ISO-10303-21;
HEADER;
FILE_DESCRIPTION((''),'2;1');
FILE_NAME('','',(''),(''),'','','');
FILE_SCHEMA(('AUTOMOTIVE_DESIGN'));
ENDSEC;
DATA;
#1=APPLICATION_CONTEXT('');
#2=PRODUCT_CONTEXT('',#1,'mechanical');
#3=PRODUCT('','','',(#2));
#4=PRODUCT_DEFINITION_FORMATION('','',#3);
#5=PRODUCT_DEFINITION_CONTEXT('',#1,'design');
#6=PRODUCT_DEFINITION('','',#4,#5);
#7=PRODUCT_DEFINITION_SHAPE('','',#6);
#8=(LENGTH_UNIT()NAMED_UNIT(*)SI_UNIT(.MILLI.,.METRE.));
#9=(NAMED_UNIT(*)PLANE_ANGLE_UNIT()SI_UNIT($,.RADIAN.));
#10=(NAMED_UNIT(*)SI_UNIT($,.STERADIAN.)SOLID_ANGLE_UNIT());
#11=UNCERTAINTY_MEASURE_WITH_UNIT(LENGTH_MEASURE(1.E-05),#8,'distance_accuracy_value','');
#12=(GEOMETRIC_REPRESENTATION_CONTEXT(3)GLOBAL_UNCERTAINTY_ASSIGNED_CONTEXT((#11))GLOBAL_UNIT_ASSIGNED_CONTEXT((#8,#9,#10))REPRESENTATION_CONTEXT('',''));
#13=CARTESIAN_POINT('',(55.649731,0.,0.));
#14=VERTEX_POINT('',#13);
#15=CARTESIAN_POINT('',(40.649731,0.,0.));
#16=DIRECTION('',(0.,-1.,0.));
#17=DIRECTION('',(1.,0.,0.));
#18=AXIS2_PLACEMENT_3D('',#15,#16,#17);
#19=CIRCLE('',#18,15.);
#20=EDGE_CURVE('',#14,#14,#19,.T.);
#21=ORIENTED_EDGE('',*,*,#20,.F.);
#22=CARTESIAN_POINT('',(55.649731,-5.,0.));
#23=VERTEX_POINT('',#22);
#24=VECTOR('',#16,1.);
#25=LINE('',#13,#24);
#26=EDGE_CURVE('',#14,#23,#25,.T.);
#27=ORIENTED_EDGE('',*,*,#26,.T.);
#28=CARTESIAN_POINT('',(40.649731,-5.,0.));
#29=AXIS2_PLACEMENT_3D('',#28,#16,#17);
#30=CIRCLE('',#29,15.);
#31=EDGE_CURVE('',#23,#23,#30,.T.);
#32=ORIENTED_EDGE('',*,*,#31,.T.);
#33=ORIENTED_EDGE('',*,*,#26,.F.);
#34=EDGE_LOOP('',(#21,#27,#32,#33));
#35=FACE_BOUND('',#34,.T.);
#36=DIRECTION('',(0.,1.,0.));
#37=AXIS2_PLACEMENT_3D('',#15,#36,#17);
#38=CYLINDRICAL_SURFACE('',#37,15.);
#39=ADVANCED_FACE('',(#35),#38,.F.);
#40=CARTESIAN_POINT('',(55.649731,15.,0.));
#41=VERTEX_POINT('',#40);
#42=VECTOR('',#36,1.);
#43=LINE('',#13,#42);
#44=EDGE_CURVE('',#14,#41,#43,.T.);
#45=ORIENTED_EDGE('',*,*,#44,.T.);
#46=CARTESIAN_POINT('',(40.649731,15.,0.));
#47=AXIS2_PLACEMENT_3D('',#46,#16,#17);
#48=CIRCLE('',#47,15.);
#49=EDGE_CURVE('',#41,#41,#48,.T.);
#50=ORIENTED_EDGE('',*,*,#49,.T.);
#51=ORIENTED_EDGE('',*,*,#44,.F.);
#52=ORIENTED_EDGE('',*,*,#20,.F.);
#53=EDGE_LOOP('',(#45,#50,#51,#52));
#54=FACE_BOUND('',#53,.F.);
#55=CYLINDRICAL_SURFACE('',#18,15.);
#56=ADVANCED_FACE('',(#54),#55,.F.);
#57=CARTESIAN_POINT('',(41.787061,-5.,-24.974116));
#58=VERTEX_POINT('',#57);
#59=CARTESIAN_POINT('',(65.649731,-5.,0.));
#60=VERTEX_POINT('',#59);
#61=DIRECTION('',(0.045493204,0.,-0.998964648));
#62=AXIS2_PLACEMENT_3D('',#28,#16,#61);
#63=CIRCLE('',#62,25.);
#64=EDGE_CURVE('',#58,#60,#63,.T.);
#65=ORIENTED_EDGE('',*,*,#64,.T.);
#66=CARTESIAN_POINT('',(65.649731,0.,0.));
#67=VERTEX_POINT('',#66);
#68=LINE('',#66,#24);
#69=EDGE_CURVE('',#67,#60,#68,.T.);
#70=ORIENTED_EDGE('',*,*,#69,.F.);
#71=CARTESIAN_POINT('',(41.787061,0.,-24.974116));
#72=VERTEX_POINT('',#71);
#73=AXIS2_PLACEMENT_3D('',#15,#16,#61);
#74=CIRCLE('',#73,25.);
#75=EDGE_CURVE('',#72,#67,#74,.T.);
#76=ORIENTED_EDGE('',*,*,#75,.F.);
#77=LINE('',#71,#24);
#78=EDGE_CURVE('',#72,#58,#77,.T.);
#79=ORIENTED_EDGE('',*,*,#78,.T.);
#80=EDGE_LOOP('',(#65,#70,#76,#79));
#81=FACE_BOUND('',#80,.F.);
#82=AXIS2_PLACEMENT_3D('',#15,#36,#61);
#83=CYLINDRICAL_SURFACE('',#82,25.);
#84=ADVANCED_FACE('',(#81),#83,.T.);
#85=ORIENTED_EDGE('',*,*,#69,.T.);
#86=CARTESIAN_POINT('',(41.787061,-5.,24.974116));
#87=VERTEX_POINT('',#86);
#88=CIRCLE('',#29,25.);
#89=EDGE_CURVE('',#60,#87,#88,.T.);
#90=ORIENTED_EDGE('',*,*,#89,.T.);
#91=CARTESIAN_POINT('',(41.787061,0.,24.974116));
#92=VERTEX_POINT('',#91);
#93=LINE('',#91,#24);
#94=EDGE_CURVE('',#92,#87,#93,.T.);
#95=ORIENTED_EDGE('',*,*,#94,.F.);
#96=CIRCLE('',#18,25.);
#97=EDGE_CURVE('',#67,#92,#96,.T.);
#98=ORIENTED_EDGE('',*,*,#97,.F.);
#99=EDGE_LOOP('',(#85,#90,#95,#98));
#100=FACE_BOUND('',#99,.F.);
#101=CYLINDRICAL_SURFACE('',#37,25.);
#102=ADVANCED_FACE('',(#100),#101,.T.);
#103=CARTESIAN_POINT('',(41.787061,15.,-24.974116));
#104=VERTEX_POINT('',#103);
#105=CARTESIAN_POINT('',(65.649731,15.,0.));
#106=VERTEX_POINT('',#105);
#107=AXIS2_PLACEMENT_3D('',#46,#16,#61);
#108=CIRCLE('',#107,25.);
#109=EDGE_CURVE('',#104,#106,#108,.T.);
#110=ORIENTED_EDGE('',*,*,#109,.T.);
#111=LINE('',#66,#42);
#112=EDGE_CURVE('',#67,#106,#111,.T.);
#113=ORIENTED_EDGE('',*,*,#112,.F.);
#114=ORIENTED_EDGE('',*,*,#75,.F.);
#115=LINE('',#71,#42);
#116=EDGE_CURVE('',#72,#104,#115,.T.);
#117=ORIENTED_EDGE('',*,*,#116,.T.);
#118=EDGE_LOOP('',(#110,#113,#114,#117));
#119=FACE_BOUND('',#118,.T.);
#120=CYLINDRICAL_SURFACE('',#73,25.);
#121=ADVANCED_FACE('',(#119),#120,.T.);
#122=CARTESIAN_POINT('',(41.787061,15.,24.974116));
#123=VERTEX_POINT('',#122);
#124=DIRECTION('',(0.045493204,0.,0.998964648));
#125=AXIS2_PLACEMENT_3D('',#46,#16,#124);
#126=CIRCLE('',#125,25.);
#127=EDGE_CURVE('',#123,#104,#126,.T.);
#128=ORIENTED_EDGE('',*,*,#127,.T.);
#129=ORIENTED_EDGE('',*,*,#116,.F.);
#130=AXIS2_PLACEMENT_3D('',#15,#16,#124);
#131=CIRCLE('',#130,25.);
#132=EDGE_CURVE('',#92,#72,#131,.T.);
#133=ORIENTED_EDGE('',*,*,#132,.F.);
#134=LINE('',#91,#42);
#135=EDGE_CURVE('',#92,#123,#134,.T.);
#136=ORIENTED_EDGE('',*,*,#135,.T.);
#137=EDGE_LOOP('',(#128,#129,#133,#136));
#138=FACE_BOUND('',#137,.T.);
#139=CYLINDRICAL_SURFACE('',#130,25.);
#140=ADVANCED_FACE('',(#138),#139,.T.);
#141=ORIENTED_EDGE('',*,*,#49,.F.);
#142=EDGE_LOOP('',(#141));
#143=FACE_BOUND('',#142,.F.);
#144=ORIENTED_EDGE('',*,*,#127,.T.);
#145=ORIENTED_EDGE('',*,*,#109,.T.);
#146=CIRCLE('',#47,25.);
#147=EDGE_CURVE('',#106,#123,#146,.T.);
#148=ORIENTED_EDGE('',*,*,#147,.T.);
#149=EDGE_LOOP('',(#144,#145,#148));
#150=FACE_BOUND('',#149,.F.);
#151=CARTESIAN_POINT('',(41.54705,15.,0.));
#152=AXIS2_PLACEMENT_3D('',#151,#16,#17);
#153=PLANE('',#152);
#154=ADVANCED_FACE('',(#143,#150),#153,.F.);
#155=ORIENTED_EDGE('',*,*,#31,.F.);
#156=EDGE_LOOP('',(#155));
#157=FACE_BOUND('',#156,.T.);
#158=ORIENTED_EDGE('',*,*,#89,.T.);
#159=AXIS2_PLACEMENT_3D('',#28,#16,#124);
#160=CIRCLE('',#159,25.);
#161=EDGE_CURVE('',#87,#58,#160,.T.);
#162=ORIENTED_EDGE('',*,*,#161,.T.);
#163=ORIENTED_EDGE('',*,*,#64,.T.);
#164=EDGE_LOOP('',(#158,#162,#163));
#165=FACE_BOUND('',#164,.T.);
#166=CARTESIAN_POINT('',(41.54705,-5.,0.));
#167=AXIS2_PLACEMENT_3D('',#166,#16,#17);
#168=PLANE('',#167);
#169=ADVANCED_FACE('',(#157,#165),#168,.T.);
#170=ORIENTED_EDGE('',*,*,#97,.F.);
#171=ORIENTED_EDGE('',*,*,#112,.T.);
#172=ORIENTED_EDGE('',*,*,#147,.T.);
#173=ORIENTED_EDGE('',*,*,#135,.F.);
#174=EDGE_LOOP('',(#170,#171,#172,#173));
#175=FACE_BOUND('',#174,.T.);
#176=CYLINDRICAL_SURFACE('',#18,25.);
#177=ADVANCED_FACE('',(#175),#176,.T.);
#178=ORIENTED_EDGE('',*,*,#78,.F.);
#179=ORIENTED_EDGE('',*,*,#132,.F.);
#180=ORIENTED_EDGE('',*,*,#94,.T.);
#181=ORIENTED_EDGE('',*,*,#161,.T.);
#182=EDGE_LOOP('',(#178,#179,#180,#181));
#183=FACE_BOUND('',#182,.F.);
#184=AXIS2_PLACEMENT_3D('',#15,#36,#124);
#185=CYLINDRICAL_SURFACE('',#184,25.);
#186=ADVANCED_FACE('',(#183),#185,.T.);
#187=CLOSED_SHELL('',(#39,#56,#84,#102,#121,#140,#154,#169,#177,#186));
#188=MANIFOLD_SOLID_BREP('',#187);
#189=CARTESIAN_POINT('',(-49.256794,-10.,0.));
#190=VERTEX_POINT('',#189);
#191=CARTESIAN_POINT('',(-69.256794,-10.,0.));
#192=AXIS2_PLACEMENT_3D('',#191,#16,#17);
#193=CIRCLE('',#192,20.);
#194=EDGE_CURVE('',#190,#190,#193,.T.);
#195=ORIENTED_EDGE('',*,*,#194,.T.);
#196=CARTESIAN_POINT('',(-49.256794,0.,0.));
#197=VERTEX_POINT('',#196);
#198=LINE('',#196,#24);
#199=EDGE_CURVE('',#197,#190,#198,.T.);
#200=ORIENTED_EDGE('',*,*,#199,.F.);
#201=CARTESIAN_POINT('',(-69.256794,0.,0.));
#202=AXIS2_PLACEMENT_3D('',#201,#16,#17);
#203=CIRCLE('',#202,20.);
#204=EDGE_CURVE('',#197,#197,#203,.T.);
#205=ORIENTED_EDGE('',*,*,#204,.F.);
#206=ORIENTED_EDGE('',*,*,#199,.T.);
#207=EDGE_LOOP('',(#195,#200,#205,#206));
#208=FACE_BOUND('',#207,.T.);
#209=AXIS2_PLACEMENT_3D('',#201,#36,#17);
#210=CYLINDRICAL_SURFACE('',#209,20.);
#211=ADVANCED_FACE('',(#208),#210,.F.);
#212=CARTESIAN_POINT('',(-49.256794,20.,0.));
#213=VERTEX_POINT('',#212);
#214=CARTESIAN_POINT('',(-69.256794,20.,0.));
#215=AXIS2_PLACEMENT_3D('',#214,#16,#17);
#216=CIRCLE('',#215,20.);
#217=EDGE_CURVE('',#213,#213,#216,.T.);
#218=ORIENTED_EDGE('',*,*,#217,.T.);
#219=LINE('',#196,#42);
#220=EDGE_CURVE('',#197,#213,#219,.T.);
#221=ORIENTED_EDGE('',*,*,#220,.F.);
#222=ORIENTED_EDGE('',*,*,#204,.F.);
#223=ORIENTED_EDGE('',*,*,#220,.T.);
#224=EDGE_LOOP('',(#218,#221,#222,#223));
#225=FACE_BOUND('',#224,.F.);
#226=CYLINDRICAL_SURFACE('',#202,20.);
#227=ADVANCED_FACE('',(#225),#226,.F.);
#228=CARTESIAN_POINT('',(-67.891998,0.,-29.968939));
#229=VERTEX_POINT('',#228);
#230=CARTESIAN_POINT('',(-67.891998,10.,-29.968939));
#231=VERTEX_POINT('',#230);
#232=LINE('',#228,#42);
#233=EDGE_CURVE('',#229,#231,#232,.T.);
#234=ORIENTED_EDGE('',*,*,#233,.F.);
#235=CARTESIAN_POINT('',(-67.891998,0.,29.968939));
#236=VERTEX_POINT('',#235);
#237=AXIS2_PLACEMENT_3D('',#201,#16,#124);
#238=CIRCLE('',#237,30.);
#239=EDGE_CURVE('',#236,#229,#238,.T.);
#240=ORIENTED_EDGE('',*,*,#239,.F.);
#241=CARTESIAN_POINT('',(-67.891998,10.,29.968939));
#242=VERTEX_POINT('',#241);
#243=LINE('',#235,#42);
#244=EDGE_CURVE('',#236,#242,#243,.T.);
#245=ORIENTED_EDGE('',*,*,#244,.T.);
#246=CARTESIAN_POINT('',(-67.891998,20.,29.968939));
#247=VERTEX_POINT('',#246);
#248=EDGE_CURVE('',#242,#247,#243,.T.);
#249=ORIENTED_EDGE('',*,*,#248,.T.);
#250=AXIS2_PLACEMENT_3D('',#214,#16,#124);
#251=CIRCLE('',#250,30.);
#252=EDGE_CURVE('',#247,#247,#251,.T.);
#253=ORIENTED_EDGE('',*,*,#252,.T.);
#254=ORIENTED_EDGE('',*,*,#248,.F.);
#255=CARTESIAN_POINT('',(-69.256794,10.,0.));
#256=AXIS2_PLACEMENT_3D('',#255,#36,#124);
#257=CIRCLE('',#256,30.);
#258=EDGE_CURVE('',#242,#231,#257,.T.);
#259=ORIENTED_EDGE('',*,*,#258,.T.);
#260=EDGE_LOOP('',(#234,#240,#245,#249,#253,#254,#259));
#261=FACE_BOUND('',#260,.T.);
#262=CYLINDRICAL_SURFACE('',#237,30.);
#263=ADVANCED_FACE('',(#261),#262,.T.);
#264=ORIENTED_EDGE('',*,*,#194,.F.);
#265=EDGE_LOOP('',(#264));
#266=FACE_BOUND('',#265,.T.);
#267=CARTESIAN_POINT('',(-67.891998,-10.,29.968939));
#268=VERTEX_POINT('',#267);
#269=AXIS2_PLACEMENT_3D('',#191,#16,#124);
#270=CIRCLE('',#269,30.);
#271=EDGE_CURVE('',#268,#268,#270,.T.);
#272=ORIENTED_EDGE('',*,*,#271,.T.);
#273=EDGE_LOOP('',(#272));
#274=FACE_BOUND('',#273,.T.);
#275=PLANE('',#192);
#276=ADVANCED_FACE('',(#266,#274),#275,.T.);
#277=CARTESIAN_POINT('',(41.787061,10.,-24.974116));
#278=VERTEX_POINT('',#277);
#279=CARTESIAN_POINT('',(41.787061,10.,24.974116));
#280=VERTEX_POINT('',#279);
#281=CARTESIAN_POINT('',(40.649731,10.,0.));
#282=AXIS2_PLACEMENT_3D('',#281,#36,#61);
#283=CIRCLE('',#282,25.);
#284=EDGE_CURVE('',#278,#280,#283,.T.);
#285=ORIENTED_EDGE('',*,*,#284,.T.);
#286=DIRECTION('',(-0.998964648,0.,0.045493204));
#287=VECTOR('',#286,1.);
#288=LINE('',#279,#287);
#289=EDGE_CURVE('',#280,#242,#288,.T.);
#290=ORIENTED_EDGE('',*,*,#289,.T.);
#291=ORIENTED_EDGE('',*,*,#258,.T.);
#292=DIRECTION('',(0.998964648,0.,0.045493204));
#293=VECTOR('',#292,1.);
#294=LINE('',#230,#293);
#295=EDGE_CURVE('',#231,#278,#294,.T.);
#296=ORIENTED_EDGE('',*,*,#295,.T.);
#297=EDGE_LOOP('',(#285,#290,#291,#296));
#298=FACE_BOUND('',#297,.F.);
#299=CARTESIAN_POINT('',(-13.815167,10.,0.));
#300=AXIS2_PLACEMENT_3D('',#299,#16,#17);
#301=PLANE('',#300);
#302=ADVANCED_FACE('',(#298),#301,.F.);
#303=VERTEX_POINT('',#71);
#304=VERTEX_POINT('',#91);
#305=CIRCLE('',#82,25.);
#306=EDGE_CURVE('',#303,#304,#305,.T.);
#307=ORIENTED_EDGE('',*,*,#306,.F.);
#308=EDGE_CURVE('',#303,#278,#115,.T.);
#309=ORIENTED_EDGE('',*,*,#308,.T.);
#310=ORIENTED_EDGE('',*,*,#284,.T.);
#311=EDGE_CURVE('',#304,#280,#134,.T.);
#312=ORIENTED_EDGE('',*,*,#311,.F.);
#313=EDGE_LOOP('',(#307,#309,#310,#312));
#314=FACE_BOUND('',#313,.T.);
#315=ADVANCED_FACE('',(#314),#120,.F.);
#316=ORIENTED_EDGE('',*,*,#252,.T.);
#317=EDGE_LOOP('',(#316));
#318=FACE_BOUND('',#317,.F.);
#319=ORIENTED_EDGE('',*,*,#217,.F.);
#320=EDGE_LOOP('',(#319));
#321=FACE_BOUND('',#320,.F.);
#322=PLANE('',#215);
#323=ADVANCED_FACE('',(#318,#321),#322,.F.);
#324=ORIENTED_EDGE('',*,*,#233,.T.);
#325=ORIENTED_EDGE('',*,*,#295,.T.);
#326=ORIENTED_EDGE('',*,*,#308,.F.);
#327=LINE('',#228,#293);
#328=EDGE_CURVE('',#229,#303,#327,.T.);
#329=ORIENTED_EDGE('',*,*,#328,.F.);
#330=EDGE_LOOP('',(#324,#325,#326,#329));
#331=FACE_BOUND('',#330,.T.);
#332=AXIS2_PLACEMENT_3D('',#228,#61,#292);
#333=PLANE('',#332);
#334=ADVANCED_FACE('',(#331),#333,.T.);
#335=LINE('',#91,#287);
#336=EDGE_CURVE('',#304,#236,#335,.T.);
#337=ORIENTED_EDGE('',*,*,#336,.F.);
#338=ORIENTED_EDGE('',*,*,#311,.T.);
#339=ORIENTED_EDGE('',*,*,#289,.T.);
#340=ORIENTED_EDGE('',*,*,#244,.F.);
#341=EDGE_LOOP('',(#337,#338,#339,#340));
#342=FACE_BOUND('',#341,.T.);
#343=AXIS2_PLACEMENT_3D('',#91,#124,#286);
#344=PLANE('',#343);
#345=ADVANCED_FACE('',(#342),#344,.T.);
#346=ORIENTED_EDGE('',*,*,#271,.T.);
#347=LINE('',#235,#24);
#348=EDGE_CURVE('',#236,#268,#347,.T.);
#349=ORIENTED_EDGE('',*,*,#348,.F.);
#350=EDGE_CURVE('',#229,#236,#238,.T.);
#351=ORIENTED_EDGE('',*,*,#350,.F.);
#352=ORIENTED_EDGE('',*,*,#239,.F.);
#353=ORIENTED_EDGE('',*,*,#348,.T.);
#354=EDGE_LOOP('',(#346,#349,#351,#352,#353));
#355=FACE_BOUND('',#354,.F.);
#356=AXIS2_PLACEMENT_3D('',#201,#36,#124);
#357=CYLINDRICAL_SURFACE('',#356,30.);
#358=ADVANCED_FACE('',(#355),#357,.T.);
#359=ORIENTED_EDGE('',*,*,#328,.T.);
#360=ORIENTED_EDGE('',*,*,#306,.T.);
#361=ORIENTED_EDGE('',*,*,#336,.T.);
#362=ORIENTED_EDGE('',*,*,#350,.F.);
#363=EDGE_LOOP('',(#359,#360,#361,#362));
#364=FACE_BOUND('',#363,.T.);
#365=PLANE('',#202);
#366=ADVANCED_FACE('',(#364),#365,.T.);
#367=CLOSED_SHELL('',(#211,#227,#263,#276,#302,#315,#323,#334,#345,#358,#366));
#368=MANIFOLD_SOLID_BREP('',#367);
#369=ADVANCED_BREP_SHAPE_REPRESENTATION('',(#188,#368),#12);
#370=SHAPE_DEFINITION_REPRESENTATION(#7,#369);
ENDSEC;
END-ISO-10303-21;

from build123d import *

# Parameters (mm, degrees)
F1_DEPTH = 10
F0_R     = 20
F2_DEPTH = 20
F0_R_2   = 15
F3_DEPTH = 15
F4_DEPTH = 10
F5_DEPTH = 5


with BuildPart() as f1:
    # F0 (on Front) → F1 (new body)
    with BuildSketch(Plane.XZ):
        with BuildLine():
            ThreePointArc((-67.8919983579, 29.9689394462), (-47.5664292993, 20.7250586992), (-39.2567944856, 0))
            ThreePointArc((-39.2567944856, 0), (-47.5664292993, -20.7250586992), (-67.8919983579, -29.9689394462))
            Line((-67.8919983579, -29.9689394462), (41.7870608186, -24.9741162052))
            ThreePointArc((41.7870608186, -24.9741162052), (15.6497307122, 0), (41.7870608186, 24.9741162052))
            Line((41.7870608186, 24.9741162052), (-67.8919983579, 29.9689394462))
        make_face()
    extrude(amount=-F1_DEPTH)

    # F0 (on Front) → F2 (join)
    with BuildSketch(Plane.XZ):
        with BuildLine():
            ThreePointArc((-67.8919983579, -29.9689394462), (-47.5664292993, -20.7250586992), (-39.2567944856, 0))
            ThreePointArc((-39.2567944856, 0), (-47.5664292993, 20.7250586992), (-67.8919983579, 29.9689394462))
            ThreePointArc((-67.8919983579, 29.9689394462), (-99.2567944856, 0), (-67.8919983579, -29.9689394462))
        make_face()
        with Locations((-69.2567944856, 0)):
            Circle(F0_R, mode=Mode.SUBTRACT)
    extrude(amount=-F2_DEPTH)

    # F0 (on Front) → F4 (join)
    with BuildSketch(Plane.XZ):
        with BuildLine():
            ThreePointArc((-67.8919983579, -29.9689394462), (-47.5664292993, -20.7250586992), (-39.2567944856, 0))
            ThreePointArc((-39.2567944856, 0), (-47.5664292993, 20.7250586992), (-67.8919983579, 29.9689394462))
            ThreePointArc((-67.8919983579, 29.9689394462), (-99.2567944856, 0), (-67.8919983579, -29.9689394462))
        make_face()
        with Locations((-69.2567944856, 0)):
            Circle(F0_R, mode=Mode.SUBTRACT)
    extrude(amount=F4_DEPTH)


with BuildPart() as f3:
    # F0 (on Front) → F3 (new body)
    with BuildSketch(Plane.XZ):
        with BuildLine():
            ThreePointArc((65.6497307122, 0), (58.7250350341, 17.2708822493), (41.7870608186, 24.9741162052))
            ThreePointArc((41.7870608186, 24.9741162052), (15.6497307122, 0), (41.7870608186, -24.9741162052))
            ThreePointArc((41.7870608186, -24.9741162052), (58.7250350341, -17.2708822493), (65.6497307122, 0))
        make_face()
        with Locations((40.6497307122, 0)):
            Circle(F0_R_2, mode=Mode.SUBTRACT)
    extrude(amount=-F3_DEPTH)

    # F0 (on Front) → F5 (join)
    with BuildSketch(Plane.XZ):
        with BuildLine():
            ThreePointArc((65.6497307122, 0), (58.7250350341, 17.2708822493), (41.7870608186, 24.9741162052))
            ThreePointArc((41.7870608186, 24.9741162052), (15.6497307122, 0), (41.7870608186, -24.9741162052))
            ThreePointArc((41.7870608186, -24.9741162052), (58.7250350341, -17.2708822493), (65.6497307122, 0))
        make_face()
        with Locations((40.6497307122, 0)):
            Circle(F0_R_2, mode=Mode.SUBTRACT)
    extrude(amount=F5_DEPTH)


solid = Compound([f1.part, f3.part])
